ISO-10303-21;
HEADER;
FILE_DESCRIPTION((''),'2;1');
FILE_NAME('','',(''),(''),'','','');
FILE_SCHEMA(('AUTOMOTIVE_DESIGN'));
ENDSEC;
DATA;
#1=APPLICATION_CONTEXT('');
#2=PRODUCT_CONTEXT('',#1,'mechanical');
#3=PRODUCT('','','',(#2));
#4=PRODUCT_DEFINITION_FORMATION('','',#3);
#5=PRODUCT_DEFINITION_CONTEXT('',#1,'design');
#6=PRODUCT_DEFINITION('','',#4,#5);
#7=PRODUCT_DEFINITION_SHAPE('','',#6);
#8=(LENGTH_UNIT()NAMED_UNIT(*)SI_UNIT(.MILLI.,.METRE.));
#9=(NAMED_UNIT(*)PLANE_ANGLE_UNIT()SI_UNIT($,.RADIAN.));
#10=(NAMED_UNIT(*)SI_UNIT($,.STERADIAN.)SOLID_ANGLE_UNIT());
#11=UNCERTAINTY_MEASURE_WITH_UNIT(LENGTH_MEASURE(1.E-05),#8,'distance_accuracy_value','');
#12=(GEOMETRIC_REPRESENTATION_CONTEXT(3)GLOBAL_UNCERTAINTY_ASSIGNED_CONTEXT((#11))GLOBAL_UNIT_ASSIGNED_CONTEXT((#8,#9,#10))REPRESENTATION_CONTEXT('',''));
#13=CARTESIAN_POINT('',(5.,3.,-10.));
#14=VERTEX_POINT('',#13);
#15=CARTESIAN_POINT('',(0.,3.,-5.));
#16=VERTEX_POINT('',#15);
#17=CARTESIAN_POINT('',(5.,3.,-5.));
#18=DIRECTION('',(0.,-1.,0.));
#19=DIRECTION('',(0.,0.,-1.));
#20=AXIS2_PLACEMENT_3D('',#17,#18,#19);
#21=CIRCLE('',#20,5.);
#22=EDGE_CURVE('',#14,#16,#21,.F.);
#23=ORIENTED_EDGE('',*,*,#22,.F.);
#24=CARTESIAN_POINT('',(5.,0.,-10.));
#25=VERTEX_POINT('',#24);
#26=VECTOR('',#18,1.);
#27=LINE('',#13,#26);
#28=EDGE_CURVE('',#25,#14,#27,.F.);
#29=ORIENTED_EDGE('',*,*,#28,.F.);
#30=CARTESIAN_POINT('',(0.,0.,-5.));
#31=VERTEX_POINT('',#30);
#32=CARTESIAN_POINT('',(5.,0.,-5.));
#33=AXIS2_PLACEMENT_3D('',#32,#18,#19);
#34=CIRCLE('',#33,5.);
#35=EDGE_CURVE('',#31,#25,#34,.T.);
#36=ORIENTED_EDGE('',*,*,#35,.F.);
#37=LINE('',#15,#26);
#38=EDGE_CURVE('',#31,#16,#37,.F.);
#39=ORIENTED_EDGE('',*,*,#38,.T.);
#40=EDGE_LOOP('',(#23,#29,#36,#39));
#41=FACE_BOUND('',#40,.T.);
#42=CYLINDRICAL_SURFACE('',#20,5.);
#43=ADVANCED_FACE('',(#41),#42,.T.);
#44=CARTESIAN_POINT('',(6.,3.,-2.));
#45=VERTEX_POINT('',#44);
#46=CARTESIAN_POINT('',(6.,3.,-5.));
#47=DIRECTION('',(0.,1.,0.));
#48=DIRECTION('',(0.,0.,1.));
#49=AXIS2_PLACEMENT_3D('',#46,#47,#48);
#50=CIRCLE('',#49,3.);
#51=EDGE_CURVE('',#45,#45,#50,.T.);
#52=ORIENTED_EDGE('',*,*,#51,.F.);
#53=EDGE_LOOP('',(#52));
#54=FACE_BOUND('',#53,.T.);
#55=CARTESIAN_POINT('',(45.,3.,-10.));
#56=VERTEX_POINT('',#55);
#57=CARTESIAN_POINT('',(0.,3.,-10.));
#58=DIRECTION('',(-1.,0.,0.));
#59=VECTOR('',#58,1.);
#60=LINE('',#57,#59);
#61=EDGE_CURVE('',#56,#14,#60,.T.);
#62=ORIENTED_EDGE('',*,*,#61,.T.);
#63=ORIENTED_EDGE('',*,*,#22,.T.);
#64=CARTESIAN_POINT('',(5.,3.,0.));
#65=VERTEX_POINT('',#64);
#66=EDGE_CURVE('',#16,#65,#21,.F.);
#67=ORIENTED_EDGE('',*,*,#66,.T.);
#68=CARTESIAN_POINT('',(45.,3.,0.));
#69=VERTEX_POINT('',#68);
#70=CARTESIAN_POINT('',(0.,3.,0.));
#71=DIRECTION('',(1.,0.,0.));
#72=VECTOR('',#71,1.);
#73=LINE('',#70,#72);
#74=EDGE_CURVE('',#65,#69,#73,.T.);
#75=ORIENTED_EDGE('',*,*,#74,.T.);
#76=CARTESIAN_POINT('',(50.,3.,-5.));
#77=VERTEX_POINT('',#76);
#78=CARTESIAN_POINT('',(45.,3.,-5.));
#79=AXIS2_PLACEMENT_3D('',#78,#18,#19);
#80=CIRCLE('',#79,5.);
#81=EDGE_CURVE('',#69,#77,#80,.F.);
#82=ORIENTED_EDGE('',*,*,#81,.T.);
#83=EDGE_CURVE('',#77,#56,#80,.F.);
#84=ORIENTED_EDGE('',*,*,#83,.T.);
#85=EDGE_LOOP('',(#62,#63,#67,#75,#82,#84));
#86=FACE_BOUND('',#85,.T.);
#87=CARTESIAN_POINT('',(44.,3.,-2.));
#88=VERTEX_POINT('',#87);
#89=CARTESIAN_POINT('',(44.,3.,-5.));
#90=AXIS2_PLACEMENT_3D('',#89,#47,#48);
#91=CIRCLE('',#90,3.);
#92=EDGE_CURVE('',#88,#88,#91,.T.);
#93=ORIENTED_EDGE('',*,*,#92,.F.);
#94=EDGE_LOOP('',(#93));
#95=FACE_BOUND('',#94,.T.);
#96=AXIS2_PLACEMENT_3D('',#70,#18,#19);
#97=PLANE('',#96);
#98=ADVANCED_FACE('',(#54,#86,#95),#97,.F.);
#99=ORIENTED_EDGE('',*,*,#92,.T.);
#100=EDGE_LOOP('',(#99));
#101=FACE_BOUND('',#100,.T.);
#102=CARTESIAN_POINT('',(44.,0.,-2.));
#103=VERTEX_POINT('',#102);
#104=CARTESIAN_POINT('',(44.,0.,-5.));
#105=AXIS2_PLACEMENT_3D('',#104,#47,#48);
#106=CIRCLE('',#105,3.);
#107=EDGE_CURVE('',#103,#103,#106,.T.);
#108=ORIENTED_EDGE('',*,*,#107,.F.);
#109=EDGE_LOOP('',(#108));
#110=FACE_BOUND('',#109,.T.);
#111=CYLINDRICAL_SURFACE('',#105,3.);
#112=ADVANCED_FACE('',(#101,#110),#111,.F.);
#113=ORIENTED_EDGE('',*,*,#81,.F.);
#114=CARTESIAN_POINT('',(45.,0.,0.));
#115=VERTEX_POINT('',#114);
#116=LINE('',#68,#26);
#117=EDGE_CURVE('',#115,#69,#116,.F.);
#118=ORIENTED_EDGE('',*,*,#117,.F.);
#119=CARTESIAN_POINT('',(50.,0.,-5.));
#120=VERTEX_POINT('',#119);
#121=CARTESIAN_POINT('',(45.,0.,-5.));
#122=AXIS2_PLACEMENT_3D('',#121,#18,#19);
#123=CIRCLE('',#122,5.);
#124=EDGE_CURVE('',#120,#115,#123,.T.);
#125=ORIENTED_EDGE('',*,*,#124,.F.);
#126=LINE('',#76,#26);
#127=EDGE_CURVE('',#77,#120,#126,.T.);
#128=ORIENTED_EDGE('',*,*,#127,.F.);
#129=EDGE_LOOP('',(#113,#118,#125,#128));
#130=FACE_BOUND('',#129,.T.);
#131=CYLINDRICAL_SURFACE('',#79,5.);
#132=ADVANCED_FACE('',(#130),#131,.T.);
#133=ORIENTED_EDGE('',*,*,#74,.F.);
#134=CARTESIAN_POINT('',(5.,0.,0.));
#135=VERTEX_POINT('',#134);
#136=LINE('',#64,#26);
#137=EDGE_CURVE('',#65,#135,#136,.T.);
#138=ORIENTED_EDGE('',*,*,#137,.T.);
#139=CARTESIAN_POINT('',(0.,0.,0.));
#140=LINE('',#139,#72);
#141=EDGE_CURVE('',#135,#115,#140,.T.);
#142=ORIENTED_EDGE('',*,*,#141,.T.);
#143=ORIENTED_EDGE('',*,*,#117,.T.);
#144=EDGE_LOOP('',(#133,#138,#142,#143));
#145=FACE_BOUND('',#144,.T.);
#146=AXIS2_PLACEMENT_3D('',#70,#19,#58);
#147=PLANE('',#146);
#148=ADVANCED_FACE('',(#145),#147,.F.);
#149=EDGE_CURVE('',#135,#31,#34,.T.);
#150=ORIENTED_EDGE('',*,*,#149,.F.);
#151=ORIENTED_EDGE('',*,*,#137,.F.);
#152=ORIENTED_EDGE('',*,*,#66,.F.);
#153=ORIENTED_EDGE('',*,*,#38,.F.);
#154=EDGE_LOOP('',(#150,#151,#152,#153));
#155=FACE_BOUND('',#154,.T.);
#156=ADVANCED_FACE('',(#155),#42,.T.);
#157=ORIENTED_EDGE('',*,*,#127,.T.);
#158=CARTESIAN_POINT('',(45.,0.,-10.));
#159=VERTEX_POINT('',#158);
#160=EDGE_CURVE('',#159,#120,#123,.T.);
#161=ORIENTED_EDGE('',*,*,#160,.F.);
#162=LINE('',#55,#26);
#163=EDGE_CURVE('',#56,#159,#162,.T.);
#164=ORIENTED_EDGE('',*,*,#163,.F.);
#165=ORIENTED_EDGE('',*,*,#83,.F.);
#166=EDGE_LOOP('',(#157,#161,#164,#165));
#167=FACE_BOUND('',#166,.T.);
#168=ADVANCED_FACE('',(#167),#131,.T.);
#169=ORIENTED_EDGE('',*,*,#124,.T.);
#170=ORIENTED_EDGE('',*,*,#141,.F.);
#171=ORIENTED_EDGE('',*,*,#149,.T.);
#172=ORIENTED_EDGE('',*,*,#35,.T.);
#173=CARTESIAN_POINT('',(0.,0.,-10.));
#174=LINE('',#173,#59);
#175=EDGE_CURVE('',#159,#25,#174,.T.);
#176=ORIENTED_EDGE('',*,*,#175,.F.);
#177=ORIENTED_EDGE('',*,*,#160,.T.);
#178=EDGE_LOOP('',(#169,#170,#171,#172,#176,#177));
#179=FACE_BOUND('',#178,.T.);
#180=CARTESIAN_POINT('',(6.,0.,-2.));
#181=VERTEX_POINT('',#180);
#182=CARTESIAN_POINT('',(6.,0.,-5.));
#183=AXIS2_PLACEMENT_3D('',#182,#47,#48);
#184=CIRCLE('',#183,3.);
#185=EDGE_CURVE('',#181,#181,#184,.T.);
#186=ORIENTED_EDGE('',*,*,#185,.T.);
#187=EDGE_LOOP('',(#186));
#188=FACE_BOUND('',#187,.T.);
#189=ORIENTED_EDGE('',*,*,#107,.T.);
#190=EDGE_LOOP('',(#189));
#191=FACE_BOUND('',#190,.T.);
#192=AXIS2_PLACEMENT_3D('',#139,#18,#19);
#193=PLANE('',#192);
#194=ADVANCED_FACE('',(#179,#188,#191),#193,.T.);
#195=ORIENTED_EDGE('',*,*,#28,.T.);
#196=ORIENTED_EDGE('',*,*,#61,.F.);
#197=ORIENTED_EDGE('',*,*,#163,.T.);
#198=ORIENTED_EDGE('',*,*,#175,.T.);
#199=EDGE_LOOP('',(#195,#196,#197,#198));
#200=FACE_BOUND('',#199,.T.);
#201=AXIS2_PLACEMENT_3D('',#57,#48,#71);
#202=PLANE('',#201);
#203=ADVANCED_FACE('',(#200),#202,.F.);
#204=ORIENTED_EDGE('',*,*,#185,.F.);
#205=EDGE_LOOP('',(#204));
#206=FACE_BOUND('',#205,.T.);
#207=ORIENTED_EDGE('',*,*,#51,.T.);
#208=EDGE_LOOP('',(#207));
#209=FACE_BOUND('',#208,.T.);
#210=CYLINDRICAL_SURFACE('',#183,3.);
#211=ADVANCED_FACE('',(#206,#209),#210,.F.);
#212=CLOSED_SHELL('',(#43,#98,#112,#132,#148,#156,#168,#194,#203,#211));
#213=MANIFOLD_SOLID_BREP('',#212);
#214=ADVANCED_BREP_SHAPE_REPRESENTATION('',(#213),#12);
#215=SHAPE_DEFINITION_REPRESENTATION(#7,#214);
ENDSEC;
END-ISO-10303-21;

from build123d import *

# Parameters (mm, degrees)
SKETCH2_W           = 50
SKETCH2_H           = 10
BOSS_EXTRUDE1_DEPTH = 3
FILLET1_R           = 5
FILLET2_R           = 5
SKETCH9_R           = 3
CUT_EXTRUDE2_DEPTH  = 52.078371156
SKETCH10_R          = 3
CUT_EXTRUDE3_DEPTH  = 52.078371156


with BuildPart() as part:
    # Sketch2 → Boss-Extrude1 (new body)
    with BuildSketch(Plane(origin=(0, 0, 0), x_dir=(1, 0, 0), z_dir=(0, 1, 0))):
        with Locations((25, 5)):
            Rectangle(SKETCH2_W, SKETCH2_H)
    extrude(amount=BOSS_EXTRUDE1_DEPTH)

    # Fillet1
    fillet1_edges = [part.edges().sort_by_distance(p)[0] for p in [
        (0, 1.5, -10),
        (0, 1.5, 0),
    ]]
    fillet(fillet1_edges, radius=FILLET1_R - 0.0001)  # a hair under: the kernel refuses the full size

    # Fillet2
    fillet2_edges = [part.edges().sort_by_distance(p)[0] for p in [
        (50, 1.5, -10),
        (50, 1.5, 0),
    ]]
    fillet(fillet2_edges, radius=FILLET2_R - 0.0001)  # a hair under: the kernel refuses the full size

    # Sketch9 → Cut-Extrude2 (cut, through all)
    with BuildSketch(Plane(origin=(0, 3, 0), x_dir=(1, 0, 0), z_dir=(0, 1, 0))):
        with Locations(Location((6, 5, 0), (0, 0, 270))):
            Circle(SKETCH9_R)
    extrude(amount=-CUT_EXTRUDE2_DEPTH, mode=Mode.SUBTRACT)

    # Sketch10 → Cut-Extrude3 (cut, through all)
    with BuildSketch(Plane(origin=(0, 3, 0), x_dir=(1, 0, 0), z_dir=(0, 1, 0))):
        with Locations(Location((44, 5, 0), (0, 0, 270))):
            Circle(SKETCH10_R)
    extrude(amount=-CUT_EXTRUDE3_DEPTH, mode=Mode.SUBTRACT)


solid = part.part
